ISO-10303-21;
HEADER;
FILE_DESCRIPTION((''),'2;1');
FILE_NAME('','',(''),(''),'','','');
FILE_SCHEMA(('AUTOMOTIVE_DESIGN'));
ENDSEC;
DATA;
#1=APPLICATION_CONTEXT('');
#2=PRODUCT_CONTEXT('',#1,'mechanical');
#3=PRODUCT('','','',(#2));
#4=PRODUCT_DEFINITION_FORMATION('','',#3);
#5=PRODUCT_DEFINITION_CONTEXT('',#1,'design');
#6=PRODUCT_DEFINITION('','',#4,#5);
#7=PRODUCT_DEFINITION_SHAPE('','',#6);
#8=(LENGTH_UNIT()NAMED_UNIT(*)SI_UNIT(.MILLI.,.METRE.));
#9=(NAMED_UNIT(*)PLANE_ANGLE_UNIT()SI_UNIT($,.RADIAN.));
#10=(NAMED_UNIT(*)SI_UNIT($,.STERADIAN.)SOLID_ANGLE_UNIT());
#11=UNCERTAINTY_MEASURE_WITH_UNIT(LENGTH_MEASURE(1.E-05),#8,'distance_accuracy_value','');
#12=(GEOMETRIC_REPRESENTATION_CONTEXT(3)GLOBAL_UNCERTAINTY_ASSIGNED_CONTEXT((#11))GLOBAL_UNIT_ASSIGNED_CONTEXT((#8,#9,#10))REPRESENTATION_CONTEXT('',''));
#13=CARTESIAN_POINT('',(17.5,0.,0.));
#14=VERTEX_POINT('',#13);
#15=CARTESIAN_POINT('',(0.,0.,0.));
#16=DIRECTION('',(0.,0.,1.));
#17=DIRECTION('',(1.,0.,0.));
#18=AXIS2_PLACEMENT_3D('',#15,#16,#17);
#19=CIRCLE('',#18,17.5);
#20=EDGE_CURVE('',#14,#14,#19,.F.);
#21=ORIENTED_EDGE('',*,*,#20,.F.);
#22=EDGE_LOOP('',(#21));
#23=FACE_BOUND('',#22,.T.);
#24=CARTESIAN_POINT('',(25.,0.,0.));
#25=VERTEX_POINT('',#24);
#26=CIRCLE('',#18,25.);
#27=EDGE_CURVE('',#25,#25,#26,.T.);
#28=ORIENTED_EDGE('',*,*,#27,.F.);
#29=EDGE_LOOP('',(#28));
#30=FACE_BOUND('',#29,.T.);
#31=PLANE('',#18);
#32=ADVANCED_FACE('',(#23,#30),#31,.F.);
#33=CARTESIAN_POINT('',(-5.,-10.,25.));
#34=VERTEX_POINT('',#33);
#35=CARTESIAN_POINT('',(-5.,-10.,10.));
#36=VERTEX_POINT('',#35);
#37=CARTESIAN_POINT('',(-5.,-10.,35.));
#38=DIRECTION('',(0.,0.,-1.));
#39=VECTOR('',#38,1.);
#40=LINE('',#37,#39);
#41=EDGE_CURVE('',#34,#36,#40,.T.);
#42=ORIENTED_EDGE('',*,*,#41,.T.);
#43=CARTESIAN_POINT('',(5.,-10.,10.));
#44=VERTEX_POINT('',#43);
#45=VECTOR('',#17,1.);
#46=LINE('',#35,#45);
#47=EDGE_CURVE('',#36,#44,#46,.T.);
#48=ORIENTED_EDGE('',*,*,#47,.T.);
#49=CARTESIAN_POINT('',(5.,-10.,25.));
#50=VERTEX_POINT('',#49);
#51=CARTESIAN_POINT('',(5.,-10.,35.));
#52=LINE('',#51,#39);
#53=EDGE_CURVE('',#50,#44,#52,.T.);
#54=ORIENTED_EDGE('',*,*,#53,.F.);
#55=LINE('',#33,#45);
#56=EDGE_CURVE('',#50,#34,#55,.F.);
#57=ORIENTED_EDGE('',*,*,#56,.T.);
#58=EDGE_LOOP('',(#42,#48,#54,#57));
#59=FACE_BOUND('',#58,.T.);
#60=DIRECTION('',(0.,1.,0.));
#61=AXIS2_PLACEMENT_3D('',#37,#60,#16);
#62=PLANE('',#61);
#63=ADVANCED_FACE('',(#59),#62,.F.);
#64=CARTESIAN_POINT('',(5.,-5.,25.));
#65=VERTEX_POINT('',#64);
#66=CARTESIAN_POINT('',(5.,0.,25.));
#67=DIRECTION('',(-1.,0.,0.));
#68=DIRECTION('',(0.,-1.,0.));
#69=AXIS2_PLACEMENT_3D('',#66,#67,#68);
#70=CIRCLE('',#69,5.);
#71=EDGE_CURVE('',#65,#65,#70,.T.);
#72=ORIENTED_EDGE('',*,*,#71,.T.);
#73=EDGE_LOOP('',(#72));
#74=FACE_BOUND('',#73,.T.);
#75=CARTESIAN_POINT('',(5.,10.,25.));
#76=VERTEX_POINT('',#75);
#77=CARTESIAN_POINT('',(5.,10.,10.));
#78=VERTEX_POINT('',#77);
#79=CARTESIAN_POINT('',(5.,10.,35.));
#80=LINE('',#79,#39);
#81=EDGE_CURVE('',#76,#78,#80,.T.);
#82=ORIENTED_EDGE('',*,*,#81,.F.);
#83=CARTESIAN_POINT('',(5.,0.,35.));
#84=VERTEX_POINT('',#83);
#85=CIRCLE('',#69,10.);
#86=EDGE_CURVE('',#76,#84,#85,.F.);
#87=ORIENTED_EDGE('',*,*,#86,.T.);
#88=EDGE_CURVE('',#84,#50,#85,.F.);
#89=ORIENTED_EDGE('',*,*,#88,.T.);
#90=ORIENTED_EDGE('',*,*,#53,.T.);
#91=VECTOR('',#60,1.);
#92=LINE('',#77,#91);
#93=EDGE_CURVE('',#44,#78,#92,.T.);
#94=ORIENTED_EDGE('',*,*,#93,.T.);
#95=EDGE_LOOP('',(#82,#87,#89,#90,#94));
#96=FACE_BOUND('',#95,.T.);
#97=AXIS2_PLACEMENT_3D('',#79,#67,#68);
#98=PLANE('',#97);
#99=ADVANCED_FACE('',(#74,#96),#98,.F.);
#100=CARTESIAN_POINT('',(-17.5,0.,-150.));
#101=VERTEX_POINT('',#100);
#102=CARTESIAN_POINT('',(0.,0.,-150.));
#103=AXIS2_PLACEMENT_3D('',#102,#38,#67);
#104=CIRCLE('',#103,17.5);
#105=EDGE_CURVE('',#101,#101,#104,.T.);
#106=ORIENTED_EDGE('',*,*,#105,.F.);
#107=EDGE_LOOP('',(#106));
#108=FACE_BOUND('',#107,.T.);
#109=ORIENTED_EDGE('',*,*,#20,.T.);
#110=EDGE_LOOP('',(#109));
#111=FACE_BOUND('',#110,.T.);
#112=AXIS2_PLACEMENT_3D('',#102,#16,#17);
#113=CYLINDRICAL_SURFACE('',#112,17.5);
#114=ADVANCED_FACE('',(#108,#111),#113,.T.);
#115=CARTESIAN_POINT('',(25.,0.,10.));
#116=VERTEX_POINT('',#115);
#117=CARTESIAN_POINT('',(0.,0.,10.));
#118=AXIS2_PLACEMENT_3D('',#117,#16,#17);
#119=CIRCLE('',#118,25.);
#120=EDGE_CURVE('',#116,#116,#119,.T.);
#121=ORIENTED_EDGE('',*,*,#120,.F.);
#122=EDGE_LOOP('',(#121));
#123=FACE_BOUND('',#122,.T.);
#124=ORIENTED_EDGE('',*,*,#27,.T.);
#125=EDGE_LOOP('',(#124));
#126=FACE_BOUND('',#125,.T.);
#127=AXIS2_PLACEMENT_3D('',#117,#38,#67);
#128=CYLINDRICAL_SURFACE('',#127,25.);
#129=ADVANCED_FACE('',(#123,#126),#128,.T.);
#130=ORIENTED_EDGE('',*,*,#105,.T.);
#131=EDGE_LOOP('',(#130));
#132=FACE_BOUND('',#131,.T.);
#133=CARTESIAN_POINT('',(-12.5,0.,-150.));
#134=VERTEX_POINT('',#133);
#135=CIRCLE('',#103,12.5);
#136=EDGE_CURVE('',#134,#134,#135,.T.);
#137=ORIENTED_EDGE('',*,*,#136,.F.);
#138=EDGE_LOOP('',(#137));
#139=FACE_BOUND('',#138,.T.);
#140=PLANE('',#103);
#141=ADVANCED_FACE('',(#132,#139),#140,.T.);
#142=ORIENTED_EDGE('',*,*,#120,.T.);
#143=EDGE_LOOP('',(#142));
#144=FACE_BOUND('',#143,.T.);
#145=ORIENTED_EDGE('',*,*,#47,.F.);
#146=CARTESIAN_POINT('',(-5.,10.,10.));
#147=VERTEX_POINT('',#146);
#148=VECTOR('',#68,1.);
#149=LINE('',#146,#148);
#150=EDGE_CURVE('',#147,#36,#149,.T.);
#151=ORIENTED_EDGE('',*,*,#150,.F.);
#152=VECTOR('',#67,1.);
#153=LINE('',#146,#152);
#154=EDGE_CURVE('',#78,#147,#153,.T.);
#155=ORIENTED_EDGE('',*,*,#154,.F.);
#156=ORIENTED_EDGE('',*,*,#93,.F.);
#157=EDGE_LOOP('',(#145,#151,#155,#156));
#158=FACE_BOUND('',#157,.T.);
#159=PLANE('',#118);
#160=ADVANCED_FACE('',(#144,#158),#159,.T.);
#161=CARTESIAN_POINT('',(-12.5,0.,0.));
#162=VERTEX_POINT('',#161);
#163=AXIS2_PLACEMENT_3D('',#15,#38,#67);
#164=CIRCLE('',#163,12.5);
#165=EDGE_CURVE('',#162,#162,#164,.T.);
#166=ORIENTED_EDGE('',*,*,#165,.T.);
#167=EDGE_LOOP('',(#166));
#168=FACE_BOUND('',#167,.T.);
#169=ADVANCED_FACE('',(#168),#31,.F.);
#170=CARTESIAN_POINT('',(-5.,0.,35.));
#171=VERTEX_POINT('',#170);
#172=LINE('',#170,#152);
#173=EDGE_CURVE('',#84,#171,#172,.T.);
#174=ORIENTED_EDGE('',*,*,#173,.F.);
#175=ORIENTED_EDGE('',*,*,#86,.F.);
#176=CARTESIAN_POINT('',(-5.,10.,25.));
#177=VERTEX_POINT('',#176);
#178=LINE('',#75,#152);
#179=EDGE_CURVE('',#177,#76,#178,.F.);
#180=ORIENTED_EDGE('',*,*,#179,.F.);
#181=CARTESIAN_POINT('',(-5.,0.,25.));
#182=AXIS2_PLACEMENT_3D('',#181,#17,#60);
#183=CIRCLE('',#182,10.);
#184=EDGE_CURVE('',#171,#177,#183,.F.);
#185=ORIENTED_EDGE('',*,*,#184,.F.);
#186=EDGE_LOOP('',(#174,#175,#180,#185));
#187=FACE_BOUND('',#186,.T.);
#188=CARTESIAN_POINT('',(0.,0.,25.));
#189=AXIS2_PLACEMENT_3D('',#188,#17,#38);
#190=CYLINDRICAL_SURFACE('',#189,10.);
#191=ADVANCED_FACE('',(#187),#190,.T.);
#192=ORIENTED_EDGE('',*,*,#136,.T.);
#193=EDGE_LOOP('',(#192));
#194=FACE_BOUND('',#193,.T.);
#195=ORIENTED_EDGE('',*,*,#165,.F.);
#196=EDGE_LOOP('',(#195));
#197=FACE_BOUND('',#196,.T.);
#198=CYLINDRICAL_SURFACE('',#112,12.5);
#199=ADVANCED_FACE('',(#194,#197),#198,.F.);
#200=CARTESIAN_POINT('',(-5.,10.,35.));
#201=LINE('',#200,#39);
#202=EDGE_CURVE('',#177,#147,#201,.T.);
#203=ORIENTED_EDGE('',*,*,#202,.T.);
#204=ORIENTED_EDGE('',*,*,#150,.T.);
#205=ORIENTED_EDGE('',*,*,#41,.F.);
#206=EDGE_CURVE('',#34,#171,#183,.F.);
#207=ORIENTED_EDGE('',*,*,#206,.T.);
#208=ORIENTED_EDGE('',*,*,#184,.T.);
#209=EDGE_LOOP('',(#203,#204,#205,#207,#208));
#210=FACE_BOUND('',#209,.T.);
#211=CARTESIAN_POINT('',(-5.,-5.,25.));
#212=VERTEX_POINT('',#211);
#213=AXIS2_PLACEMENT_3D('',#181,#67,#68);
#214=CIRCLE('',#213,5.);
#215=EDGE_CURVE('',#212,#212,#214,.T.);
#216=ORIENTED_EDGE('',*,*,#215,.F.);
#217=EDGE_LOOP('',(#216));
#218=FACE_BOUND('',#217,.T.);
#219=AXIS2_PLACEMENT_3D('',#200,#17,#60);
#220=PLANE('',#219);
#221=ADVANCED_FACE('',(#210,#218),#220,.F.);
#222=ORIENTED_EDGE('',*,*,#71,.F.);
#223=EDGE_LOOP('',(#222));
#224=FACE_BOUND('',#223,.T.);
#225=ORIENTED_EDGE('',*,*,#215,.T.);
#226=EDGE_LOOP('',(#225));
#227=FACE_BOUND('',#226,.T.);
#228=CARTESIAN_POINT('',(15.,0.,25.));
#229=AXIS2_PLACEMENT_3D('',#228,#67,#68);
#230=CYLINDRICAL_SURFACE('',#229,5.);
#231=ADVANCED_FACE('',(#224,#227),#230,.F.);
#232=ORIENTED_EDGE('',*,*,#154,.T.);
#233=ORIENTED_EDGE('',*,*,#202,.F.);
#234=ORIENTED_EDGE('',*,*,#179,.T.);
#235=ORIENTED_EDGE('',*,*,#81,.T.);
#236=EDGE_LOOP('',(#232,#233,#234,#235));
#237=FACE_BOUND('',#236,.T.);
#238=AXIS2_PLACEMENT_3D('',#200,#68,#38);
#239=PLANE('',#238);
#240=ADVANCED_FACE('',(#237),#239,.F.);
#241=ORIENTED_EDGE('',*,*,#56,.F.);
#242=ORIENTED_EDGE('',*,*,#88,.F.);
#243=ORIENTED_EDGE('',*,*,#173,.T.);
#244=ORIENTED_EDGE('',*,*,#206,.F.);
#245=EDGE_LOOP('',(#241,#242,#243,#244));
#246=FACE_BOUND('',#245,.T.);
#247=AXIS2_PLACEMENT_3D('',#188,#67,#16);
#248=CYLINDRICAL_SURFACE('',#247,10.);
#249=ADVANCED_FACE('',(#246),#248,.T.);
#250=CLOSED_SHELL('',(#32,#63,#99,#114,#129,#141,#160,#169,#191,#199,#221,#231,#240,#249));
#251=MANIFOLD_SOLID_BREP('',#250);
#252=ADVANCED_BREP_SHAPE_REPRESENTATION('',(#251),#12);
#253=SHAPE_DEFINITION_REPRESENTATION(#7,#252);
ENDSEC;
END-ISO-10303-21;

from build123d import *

# Parameters (mm, degrees)
SKETCH2_R           = 25
BOSS_EXTRUDE2_DEPTH = 10
SKETCH3_W           = 10
SKETCH3_H           = 20
BOSS_EXTRUDE3_DEPTH = 25
SKETCH4_R           = 5
CUT_EXTRUDE1_DEPTH  = 20
FILLET1_R           = 10
SKETCH5_R           = 17.5
SKETCH5_R_2         = 12.5
BOSS_EXTRUDE4_DEPTH = 150


with BuildPart() as part:
    # Sketch2 → Boss-Extrude2 (new body)
    with BuildSketch(Plane.XY):
        Circle(SKETCH2_R)
    extrude(amount=BOSS_EXTRUDE2_DEPTH)

    # Sketch3 → Boss-Extrude3 (add)
    with BuildSketch(Plane.XY.offset(10)):
        Rectangle(SKETCH3_W, SKETCH3_H)
    extrude(amount=BOSS_EXTRUDE3_DEPTH)

    # Sketch4 → Cut-Extrude1 (cut)
    with BuildSketch(Plane.ZY.offset(5)):
        with Locations(Location((25, 0, 0), (0, 0, 270))):
            Circle(SKETCH4_R)
    extrude(amount=-CUT_EXTRUDE1_DEPTH, mode=Mode.SUBTRACT)

    # Fillet1
    fillet1_edges = [part.edges().sort_by_distance(p)[0] for p in [
        (0, -10, 35),
        (0, 10, 35),
    ]]
    fillet(fillet1_edges, radius=FILLET1_R - 0.0001)  # a hair under: the kernel refuses the full size

    # Sketch5 → Boss-Extrude4 (add)
    with BuildSketch(Plane(origin=(0, 0, 0), x_dir=(-1, 0, 0), z_dir=(0, 0, -1))):
        with Locations(Location((0, 0, 0), (0, 0, 180))):
            Circle(SKETCH5_R)
        Circle(SKETCH5_R_2, mode=Mode.SUBTRACT)
    extrude(amount=BOSS_EXTRUDE4_DEPTH)


solid = part.part
